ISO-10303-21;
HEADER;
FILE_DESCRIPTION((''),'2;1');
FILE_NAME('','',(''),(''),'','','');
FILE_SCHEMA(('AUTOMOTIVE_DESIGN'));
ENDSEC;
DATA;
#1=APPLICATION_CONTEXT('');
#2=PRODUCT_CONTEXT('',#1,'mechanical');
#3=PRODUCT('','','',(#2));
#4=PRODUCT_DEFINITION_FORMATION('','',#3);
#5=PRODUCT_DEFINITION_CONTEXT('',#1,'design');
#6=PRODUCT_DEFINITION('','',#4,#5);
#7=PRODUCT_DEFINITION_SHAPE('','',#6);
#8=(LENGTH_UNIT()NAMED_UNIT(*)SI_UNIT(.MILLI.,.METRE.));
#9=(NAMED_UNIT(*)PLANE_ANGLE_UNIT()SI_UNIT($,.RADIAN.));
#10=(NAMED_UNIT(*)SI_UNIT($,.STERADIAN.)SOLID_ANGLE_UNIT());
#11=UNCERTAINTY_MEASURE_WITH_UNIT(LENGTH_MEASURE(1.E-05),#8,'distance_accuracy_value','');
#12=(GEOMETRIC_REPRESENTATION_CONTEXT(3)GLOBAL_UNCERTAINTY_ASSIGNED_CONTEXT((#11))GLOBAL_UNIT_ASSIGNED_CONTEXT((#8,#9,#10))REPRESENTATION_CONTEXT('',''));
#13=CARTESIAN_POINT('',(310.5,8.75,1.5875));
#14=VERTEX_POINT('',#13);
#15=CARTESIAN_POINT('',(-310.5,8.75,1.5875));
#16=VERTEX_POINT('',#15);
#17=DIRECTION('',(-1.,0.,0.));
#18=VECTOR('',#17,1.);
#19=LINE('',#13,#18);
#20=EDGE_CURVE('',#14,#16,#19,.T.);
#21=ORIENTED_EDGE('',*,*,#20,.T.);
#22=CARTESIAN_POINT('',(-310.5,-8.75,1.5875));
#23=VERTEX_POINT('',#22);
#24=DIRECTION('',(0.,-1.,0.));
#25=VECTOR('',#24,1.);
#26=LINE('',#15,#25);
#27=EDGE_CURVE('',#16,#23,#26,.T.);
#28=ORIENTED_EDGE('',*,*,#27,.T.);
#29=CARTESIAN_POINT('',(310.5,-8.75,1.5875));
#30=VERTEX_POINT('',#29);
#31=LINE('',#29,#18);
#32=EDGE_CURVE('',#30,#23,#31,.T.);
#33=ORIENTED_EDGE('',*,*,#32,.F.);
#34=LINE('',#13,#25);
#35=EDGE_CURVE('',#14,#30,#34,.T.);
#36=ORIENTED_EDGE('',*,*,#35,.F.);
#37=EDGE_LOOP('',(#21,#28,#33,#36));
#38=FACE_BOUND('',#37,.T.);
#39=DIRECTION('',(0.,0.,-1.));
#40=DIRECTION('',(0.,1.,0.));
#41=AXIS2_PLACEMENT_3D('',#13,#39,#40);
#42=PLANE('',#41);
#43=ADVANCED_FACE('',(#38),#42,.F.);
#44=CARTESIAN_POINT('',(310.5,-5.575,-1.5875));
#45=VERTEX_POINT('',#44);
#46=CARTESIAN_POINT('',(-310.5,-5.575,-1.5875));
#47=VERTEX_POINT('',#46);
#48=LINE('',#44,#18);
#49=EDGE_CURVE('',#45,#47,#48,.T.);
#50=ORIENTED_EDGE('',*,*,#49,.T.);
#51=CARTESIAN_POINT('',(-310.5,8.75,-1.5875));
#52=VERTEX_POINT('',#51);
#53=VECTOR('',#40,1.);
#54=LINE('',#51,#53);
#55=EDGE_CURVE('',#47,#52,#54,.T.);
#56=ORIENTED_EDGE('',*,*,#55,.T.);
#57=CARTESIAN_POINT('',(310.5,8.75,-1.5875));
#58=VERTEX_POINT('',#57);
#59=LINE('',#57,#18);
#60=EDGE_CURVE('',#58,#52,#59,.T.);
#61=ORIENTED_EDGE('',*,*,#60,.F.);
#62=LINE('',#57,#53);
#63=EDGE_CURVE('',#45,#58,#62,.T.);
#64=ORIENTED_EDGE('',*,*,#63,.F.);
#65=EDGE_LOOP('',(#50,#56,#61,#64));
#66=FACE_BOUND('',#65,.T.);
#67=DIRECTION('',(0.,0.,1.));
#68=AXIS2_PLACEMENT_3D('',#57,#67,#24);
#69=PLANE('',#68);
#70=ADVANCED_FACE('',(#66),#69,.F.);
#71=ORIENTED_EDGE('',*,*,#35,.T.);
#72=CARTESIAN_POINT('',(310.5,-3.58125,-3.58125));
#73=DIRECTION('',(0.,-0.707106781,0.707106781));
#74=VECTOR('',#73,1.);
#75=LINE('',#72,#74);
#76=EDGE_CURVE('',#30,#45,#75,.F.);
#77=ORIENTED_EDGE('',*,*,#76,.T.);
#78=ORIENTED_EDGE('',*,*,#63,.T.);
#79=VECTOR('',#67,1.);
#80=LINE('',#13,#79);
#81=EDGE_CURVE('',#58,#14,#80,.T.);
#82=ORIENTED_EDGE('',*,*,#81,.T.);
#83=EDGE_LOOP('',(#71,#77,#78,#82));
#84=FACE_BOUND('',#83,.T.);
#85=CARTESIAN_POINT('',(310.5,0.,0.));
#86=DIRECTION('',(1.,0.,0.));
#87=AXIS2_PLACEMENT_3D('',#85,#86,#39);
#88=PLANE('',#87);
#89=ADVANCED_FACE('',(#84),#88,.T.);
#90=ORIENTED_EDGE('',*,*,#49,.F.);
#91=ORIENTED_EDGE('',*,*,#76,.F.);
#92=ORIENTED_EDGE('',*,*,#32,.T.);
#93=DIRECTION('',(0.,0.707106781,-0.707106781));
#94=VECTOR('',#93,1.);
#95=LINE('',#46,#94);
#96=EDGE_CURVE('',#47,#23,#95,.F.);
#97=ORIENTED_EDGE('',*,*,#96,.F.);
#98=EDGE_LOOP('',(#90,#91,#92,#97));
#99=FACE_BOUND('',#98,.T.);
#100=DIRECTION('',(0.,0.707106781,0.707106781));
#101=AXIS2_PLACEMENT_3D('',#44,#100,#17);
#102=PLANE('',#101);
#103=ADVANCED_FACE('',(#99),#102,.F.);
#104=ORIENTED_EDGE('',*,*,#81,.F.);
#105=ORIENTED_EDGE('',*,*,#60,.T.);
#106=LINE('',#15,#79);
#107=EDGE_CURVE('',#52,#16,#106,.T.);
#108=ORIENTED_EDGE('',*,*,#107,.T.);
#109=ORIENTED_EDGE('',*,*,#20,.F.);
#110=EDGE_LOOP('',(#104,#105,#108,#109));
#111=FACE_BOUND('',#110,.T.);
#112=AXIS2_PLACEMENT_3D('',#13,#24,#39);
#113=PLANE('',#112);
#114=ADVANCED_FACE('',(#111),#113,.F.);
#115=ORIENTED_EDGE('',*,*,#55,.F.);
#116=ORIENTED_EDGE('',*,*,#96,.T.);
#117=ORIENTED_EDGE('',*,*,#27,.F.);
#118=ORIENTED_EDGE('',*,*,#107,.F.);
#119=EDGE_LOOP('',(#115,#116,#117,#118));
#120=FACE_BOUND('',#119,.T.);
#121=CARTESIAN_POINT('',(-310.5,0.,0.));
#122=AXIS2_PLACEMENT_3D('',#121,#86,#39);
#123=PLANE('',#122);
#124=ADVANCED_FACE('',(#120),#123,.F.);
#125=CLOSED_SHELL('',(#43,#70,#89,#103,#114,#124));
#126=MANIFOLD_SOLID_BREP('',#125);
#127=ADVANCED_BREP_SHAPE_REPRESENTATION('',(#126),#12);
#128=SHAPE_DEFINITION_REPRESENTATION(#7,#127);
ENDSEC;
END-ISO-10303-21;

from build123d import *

# Parameters (mm, degrees)
SKETCH1_W           = 3.175
SKETCH1_H           = 17.5
BOSS_EXTRUDE1_DEPTH = 310.5
CHAMFER1_SIZE       = 3.175


with BuildPart() as part:
    # Sketch1 → Boss-Extrude1 (new, symmetric)
    with BuildSketch(Plane(origin=(0, 0, 0), x_dir=(0, 0, -1), z_dir=(1, 0, 0))):
        Rectangle(SKETCH1_W, SKETCH1_H)
    extrude(amount=BOSS_EXTRUDE1_DEPTH, both=True)

    # Chamfer1
    chamfer1_edges = [part.edges().sort_by_distance(p)[0] for p in [
        (0, -8.75, -1.5875),
    ]]
    chamfer(chamfer1_edges, length=CHAMFER1_SIZE - 0.0001)  # a hair under: the kernel refuses the full size


solid = part.part
